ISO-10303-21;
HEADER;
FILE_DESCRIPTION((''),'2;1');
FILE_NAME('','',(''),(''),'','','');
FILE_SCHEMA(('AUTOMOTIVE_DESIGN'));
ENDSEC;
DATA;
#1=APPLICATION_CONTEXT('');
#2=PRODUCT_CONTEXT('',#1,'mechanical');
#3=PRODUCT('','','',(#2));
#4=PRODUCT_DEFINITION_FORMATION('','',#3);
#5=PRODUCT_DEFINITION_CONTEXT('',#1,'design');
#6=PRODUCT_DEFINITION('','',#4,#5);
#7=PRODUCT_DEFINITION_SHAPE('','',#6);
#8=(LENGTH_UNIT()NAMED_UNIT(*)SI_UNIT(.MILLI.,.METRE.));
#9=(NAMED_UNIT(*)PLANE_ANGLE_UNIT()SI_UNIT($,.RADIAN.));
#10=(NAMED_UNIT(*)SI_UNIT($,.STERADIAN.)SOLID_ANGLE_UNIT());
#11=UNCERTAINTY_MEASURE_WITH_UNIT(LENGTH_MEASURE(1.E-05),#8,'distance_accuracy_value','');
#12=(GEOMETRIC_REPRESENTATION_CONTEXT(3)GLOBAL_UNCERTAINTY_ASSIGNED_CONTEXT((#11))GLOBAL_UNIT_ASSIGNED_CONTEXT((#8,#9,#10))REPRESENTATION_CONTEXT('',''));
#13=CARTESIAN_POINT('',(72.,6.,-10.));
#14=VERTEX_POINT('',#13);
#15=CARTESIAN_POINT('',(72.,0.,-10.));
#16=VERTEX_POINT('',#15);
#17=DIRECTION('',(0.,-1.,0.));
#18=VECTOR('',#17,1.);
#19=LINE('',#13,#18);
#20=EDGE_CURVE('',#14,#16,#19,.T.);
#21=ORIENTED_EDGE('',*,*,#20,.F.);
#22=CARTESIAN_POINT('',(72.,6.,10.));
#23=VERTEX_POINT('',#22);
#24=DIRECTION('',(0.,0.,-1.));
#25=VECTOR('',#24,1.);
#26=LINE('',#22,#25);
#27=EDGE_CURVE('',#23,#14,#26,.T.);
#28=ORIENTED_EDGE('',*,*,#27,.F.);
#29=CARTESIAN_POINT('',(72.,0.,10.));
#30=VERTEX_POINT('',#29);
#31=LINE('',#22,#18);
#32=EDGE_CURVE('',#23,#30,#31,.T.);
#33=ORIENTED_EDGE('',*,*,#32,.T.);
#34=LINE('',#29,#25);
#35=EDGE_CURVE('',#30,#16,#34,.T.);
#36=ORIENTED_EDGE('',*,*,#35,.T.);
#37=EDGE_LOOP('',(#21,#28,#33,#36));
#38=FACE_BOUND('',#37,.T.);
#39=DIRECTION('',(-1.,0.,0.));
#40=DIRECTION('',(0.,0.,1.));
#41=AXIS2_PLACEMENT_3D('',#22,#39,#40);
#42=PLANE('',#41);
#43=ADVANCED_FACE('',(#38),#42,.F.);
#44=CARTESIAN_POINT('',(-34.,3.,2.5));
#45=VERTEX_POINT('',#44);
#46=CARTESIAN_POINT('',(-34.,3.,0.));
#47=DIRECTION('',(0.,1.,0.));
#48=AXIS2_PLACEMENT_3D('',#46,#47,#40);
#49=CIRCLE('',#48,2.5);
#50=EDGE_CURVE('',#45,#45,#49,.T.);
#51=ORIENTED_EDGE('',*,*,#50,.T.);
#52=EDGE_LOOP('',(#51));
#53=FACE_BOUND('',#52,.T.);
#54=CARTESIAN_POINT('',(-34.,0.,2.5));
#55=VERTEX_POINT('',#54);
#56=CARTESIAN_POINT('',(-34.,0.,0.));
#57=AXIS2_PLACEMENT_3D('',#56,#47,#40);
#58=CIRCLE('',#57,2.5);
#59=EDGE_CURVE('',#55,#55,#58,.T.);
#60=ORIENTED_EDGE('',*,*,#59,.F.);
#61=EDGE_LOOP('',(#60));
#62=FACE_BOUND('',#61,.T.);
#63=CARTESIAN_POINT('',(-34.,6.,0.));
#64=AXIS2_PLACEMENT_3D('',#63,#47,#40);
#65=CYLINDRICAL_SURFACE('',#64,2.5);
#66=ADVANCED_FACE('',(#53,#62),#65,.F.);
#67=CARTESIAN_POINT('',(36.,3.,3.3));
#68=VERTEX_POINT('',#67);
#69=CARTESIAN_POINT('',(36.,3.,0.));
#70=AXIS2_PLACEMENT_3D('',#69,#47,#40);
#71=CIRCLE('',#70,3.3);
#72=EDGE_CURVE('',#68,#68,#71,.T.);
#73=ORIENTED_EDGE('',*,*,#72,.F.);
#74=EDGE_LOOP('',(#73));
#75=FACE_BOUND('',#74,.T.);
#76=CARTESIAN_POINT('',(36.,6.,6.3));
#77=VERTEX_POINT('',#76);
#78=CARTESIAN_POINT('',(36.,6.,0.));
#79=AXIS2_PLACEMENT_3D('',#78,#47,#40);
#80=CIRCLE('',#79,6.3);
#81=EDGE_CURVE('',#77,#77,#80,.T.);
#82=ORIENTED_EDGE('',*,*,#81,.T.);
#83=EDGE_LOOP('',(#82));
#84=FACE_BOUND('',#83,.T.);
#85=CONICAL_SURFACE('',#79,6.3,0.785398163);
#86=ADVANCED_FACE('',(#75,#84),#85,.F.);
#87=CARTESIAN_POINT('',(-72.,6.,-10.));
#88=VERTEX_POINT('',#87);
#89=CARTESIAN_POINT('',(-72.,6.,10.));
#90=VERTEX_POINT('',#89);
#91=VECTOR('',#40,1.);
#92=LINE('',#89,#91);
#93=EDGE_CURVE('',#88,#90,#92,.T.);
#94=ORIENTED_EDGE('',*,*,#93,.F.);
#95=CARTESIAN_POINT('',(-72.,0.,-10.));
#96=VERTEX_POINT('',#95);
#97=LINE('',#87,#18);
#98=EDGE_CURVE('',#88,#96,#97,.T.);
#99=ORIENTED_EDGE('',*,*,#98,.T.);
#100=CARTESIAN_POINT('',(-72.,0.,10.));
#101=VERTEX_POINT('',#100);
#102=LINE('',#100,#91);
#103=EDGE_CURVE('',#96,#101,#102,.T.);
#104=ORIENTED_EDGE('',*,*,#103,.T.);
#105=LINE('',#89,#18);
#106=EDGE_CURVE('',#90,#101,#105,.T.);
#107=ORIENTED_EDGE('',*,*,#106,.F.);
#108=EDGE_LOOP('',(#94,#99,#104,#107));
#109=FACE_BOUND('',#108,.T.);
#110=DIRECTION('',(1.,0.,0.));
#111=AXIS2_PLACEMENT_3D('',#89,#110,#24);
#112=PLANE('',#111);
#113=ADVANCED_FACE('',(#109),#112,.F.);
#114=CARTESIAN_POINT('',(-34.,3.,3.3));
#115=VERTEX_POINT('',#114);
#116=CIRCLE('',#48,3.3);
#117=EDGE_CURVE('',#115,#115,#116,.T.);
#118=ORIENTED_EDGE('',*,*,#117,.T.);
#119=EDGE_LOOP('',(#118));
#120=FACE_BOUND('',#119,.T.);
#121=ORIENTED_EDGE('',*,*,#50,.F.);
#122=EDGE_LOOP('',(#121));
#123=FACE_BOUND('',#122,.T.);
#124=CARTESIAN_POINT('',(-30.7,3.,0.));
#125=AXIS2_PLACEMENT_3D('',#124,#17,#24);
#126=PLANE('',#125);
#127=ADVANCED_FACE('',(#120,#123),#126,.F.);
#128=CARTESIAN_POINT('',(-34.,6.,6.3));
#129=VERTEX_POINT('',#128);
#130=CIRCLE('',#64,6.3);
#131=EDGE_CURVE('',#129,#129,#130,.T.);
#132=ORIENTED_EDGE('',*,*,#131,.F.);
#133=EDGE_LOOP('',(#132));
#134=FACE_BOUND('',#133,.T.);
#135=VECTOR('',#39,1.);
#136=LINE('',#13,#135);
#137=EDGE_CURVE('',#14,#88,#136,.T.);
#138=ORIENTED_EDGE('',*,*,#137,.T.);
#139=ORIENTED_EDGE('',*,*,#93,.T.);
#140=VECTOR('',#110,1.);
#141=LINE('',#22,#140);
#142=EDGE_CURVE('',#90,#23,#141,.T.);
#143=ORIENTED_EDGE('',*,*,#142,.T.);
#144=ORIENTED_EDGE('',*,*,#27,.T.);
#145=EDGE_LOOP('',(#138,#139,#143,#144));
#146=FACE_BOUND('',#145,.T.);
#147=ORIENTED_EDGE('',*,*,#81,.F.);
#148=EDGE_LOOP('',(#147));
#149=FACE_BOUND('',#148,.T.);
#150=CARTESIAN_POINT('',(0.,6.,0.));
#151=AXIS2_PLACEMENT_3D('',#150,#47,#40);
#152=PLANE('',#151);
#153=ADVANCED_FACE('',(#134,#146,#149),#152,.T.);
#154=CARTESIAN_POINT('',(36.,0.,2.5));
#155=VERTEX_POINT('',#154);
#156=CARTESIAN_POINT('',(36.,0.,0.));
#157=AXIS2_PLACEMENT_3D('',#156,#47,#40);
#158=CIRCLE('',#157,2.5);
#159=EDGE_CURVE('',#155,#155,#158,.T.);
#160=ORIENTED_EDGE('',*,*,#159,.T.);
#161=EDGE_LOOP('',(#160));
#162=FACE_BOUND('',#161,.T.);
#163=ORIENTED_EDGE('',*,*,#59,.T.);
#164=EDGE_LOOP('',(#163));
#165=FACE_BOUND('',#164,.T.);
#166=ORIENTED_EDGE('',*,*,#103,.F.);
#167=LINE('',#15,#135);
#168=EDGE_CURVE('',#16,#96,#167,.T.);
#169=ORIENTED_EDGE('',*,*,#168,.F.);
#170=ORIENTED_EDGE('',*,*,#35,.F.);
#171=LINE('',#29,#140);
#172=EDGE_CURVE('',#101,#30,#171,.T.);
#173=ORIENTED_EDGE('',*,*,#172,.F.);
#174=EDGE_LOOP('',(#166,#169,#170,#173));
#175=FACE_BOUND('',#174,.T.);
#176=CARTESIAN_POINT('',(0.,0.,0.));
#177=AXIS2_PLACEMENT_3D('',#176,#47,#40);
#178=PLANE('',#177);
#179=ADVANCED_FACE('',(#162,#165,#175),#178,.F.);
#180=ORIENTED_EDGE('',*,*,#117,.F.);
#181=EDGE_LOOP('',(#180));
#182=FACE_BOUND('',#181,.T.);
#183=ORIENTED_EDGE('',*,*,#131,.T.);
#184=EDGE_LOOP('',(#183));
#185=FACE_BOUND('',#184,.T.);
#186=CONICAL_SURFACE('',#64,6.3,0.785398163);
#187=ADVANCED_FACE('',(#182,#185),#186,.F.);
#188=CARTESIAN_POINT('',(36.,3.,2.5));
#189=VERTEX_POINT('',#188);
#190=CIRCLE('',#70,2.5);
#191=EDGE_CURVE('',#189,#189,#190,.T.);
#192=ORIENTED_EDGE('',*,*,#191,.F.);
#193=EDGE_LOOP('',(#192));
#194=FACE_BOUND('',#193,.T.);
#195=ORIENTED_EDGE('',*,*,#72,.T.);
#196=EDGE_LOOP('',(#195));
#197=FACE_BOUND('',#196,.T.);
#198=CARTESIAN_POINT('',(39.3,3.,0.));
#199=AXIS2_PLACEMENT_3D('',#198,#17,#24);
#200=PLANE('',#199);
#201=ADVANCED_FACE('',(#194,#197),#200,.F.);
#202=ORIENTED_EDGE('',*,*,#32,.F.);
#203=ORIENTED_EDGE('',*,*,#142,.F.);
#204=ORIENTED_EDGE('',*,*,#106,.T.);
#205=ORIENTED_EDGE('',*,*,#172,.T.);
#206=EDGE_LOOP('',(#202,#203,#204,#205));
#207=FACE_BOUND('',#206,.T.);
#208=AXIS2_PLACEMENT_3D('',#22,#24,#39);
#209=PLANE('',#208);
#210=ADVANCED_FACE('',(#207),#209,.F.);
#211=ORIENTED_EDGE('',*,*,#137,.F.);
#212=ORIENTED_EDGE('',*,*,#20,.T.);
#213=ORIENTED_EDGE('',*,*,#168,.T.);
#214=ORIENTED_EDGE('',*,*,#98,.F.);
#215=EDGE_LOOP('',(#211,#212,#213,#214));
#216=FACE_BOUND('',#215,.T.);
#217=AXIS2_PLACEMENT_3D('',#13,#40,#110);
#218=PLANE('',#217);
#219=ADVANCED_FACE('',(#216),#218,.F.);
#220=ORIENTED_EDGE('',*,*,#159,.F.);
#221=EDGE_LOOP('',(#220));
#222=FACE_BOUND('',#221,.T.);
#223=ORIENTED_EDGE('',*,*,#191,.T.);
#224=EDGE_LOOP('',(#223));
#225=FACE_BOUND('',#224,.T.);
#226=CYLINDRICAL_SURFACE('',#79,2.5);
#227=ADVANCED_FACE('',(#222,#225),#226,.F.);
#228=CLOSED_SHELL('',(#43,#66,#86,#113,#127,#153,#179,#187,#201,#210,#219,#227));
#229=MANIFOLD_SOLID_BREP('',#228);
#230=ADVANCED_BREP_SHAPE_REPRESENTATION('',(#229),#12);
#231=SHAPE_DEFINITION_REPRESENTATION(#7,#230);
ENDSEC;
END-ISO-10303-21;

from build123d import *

# Parameters (mm, degrees)
SKETCH1_W           = 144
SKETCH1_H           = 20
BOSS_EXTRUDE1_DEPTH = 6


# Read off the part's stored shape, not the designer's step: AdvancedHole1
with BuildPart() as part:
    # Sketch1 → Boss-Extrude1 (new body)
    with BuildSketch(Plane(origin=(0, 0, 0), x_dir=(1, 0, 0), z_dir=(0, 1, 0))):
        Rectangle(SKETCH1_W, SKETCH1_H)
    extrude(amount=BOSS_EXTRUDE1_DEPTH)

    # AdvancedHole1 outline → AdvancedHole1 (revolve, cut)
    with BuildSketch(Plane(origin=(36, 0, 0), x_dir=(1, 0, 0), z_dir=(0, 0, 1))):
        Polygon((0, 0), (2.5, 0), (2.5, 3), (3.3, 3), (6.3, 6), (0, 6), align=None)
    revolve(axis=Axis((36, 0, 0), (0, 1, 0)), mode=Mode.SUBTRACT)

    # AdvancedHole1 2 outline → AdvancedHole1 2 (revolve, cut)
    with BuildSketch(Plane(origin=(-34, 0, 0), x_dir=(1, 0, 0), z_dir=(0, 0, 1))):
        Polygon((6.3, 6), (0, 6), (0, 0), (2.5, 0), (2.5, 3), (3.3, 3), align=None)
    revolve(axis=Axis((-34, 0, 0), (0, 1, 0)), mode=Mode.SUBTRACT)


solid = part.part
